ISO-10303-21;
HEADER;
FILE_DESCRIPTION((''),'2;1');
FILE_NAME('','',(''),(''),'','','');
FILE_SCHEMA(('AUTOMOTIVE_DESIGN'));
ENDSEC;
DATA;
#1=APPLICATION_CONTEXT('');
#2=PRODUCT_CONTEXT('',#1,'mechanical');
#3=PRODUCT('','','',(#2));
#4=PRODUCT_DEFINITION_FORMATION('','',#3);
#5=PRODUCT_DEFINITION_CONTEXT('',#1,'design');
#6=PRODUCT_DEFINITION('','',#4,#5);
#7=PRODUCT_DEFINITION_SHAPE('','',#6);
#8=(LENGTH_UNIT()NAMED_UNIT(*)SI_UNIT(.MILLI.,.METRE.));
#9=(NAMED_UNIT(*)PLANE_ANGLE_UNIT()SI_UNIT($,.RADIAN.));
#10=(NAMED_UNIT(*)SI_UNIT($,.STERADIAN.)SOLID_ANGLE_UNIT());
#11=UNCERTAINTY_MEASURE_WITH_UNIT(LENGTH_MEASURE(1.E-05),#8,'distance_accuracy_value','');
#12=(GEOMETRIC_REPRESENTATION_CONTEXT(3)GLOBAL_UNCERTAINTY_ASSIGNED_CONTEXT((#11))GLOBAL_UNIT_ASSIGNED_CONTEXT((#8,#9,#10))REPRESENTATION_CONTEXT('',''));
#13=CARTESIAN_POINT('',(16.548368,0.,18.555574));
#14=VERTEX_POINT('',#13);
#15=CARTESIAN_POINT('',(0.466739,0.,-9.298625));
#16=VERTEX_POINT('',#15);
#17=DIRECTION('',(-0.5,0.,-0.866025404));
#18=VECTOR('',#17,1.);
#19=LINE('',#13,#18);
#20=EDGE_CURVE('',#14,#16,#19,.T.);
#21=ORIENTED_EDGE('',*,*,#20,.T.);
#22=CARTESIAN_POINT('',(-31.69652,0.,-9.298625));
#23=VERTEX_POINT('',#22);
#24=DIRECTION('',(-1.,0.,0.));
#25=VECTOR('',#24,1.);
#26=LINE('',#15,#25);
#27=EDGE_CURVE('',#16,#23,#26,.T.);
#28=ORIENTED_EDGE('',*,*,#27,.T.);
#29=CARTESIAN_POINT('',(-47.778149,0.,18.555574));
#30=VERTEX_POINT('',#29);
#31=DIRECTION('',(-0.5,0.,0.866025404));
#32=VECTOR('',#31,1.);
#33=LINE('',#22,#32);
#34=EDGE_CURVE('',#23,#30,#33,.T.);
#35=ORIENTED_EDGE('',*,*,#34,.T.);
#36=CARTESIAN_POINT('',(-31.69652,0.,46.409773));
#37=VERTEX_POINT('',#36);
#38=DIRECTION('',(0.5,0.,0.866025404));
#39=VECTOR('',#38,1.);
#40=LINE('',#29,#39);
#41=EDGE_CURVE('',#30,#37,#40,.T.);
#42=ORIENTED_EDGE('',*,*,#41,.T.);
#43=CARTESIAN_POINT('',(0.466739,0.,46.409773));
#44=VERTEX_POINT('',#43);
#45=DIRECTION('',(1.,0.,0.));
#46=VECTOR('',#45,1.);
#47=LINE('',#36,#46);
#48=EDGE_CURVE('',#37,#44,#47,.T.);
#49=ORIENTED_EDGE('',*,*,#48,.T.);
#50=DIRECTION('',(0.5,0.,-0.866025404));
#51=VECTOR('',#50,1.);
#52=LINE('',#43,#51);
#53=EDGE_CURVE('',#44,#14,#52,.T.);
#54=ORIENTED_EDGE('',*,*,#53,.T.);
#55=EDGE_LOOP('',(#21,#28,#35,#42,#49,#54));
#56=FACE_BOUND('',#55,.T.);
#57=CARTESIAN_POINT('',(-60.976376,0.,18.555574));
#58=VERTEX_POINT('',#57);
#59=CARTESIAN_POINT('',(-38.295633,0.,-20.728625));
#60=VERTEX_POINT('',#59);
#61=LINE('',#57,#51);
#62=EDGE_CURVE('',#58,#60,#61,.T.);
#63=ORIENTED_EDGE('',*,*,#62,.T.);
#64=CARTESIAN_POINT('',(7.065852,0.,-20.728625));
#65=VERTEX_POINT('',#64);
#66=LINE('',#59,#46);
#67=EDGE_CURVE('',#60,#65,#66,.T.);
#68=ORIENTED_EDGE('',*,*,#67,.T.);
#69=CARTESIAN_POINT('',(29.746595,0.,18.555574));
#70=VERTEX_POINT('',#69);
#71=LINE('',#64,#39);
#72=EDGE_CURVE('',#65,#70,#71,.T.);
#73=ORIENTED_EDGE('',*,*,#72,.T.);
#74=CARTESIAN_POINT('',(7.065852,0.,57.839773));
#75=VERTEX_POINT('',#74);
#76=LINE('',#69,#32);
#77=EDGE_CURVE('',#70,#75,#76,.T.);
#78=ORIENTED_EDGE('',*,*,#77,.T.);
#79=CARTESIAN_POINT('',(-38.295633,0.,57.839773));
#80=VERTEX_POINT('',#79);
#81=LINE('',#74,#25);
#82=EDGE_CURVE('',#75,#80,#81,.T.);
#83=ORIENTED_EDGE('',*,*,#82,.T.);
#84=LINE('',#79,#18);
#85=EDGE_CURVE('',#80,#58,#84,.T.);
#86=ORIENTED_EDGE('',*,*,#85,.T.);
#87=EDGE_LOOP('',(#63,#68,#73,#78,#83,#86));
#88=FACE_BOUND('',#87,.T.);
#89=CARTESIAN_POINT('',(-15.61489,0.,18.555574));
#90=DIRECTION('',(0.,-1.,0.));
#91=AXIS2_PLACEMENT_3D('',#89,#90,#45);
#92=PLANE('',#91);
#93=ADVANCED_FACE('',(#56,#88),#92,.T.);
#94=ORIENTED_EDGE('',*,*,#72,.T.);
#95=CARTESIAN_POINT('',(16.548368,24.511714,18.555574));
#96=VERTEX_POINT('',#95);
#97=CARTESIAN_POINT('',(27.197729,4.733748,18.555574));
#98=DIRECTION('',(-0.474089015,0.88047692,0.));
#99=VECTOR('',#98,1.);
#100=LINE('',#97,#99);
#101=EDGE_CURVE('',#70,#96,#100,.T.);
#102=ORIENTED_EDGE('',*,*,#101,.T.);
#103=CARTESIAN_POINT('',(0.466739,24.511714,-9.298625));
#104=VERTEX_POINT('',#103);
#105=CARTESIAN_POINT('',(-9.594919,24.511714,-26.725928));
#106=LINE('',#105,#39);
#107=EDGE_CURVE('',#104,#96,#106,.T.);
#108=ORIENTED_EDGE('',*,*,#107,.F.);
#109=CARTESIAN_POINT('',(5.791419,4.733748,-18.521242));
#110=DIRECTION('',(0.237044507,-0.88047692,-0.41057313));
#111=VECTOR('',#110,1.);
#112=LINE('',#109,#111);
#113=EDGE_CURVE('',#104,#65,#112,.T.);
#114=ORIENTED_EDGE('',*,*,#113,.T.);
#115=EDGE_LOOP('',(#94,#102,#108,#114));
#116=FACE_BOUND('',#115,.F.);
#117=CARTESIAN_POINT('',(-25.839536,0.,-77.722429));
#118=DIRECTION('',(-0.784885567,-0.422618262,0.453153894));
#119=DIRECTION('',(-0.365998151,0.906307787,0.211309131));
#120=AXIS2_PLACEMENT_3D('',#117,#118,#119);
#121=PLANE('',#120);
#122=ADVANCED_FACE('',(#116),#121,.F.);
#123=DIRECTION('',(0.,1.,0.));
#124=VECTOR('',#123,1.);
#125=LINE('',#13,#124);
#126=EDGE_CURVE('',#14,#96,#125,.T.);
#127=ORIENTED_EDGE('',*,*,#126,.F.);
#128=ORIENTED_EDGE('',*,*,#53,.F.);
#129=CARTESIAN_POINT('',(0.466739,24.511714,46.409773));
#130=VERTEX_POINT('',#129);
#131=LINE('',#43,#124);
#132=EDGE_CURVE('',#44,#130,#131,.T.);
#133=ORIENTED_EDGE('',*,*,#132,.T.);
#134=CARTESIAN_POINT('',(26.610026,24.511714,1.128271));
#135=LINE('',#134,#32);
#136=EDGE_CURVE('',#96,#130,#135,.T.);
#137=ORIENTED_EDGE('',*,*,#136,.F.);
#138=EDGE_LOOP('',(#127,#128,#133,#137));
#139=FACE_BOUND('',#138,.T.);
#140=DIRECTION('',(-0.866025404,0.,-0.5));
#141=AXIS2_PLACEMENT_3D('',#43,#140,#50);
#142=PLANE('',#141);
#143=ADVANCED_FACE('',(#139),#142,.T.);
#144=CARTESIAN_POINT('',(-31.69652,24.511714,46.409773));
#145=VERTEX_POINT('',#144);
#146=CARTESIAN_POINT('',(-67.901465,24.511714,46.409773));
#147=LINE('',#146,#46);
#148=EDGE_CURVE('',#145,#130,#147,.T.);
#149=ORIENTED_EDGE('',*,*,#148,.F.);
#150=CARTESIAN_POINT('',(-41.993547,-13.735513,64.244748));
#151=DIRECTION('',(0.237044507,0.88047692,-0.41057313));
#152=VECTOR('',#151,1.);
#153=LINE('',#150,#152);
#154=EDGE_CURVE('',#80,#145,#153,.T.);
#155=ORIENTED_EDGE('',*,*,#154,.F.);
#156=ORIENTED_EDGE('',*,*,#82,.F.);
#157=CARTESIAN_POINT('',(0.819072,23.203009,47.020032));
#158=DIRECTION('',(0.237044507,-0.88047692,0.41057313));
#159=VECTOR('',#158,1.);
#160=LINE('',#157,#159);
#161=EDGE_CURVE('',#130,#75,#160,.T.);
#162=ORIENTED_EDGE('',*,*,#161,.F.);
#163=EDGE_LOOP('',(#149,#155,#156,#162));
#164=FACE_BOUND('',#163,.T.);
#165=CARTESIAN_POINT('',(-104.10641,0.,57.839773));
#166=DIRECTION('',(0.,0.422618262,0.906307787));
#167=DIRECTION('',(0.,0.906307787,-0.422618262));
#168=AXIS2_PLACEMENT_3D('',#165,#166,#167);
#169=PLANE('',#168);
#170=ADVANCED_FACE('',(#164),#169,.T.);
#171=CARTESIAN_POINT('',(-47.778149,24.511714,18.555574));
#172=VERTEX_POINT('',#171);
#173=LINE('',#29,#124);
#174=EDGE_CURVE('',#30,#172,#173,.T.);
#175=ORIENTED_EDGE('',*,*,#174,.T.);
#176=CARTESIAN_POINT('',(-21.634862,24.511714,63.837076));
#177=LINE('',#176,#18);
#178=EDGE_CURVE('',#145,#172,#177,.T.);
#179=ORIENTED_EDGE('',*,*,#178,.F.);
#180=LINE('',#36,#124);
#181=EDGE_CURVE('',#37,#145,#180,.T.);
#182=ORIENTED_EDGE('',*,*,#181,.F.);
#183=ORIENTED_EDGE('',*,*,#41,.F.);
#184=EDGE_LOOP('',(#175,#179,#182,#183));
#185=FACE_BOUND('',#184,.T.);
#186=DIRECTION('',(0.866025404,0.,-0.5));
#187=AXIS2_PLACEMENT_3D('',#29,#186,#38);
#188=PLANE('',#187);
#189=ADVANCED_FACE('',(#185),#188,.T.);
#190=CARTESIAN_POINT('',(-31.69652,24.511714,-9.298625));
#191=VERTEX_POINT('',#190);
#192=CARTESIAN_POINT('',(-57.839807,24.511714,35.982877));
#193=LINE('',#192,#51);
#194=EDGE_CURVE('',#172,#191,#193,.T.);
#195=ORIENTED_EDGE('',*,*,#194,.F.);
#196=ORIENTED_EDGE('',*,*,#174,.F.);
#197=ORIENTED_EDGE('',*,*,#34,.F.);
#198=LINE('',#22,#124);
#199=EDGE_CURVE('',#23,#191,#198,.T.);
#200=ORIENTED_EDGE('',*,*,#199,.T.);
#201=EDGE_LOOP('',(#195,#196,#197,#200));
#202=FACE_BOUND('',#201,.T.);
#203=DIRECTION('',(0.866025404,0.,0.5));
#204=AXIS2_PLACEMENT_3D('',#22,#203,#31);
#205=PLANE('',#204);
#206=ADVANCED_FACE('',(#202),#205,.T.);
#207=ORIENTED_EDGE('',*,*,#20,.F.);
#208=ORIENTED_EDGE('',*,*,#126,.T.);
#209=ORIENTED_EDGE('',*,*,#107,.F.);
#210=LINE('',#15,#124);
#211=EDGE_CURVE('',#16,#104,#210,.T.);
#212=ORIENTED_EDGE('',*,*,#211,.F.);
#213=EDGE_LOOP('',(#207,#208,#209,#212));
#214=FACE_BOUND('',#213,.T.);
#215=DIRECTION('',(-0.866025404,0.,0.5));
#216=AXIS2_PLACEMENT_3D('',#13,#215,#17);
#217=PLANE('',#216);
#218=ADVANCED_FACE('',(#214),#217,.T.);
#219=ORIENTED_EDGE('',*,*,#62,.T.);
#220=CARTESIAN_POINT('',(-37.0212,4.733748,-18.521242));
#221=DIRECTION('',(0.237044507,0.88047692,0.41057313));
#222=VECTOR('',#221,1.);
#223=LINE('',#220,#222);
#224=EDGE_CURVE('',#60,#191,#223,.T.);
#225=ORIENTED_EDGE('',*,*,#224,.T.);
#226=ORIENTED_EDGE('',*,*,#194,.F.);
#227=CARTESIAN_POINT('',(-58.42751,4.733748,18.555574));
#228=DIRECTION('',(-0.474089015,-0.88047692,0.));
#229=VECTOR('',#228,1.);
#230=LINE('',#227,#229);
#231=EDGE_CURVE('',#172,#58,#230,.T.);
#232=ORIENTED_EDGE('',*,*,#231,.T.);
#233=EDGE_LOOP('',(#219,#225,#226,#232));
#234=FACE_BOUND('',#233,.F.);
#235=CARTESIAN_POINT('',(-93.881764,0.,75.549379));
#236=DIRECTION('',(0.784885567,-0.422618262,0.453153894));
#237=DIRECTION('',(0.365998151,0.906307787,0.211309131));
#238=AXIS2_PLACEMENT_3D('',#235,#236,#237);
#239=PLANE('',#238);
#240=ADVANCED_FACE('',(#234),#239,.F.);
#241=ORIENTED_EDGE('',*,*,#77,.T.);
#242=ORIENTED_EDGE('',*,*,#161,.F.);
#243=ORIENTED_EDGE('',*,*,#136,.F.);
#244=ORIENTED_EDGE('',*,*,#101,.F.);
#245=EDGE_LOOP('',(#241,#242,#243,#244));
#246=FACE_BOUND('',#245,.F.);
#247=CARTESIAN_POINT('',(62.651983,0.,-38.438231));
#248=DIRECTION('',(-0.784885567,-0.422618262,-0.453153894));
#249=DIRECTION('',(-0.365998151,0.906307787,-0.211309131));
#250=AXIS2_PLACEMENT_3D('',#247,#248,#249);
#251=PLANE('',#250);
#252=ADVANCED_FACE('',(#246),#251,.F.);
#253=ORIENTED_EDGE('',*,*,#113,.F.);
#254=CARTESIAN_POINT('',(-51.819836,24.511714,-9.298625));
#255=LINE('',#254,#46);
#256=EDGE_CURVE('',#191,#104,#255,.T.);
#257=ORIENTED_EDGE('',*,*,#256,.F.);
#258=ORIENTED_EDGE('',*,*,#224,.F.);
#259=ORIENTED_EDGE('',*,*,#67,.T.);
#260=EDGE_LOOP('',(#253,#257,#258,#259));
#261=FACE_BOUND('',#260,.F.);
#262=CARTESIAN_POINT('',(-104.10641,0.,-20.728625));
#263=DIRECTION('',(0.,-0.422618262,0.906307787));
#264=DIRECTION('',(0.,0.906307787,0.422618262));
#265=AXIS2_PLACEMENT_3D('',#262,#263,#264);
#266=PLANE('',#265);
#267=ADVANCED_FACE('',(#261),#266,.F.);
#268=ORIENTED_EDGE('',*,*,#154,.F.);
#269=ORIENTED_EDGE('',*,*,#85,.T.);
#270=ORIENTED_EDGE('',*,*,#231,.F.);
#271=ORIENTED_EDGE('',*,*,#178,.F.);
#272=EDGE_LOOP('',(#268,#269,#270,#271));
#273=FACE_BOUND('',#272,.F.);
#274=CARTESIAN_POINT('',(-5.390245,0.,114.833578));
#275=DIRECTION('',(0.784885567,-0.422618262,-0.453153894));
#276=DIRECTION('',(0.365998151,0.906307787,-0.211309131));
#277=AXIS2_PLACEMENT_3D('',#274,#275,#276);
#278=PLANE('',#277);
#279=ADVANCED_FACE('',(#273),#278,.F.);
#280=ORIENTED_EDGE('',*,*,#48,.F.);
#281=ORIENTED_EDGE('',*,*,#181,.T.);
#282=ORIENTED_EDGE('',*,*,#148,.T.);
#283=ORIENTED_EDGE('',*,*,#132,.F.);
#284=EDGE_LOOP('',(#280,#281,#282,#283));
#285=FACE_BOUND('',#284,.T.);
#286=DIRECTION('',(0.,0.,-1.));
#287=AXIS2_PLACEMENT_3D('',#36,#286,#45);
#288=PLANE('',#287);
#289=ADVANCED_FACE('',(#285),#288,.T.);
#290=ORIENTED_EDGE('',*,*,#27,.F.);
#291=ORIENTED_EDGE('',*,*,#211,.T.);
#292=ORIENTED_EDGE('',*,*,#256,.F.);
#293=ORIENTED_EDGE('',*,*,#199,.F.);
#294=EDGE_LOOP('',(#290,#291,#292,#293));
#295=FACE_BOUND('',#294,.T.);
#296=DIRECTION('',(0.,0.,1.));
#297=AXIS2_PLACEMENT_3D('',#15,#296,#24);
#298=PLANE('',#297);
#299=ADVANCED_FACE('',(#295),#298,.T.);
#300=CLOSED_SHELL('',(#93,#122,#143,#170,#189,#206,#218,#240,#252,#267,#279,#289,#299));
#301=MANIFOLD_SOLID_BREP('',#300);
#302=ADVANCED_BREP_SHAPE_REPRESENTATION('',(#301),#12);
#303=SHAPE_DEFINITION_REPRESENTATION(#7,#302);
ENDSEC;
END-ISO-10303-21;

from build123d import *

# Parameters (mm, degrees)
F1_DEPTH    = 25.4
F2_T1_DEPTH = 176.9830394525
F2_T3_DEPTH = 176.9830394525
F2_T5_DEPTH = 176.9830394525
F2_T7_DEPTH = 176.9830394525
F2_T9_DEPTH = 176.9830394525


# Not quite as in the source:
# - a fillet or chamfer that OpenCascade refuses, or shapes differently, is made with other operations: its cross-section is extruded or revolved along the edge and cut away or added


with BuildPart() as f1:
    # F0 (on Front) → F1 (new body)
    with BuildSketch(Plane.XZ):
        Polygon((7.0658522586, 57.8397729191), (-38.2956332455, 57.8397729191), (-60.9763759976, 18.5555741191), (-38.2956332455, -20.7286246809), (7.0658522586, -20.7286246809), (29.7465950107, 18.5555741191), align=None)
        Polygon((16.548367857, 18.5555741191), (0.4667386818, -9.2986246809), (-31.6965196687, -9.2986246809), (-47.7781488439, 18.5555741191), (-31.6965196687, 46.4097729191), (0.4667386818, 46.4097729191), align=None, mode=Mode.SUBTRACT)
    extrude(amount=-F1_DEPTH)

    # F2: chamfer of 25.4 x 11.8442145171 on 6 edges, made by hand

    # F2_s2 → F2_t1 (cut)
    with BuildSketch(Plane.YZ.offset(-104.1064102197)):
        Polygon((0, 57.8397729191), (25.4, 45.995558402), (25.4, 57.8397729191), align=None)
        Polygon((0, -20.7286246809), (25.4, -8.8844101638), (25.4, -20.7286246809), align=None)
    extrude(amount=F2_T1_DEPTH, mode=Mode.SUBTRACT)

    # F2_s4 → F2_t3 (cut)
    with BuildSketch(Plane(origin=(48.3768365242, 0, 83.7911387694), x_dir=(0, 1, 0), z_dir=(-0.5, 0, -0.8660254038))):
        Polygon((0, -62.0848777042), (25.4, -50.2406631871), (25.4, -62.0848777042), align=None)
    extrude(amount=F2_T3_DEPTH, mode=Mode.SUBTRACT)

    # F2_s6 → F2_t5 (cut)
    with BuildSketch(Plane(origin=(32.3072379553, 0, -55.9577775908), x_dir=(0, 1, 0), z_dir=(-0.5, 0, 0.8660254038))):
        Polygon((0, -35.0390940149), (25.4, -23.1948794978), (25.4, -35.0390940149), align=None)
    extrude(amount=F2_T5_DEPTH, mode=Mode.SUBTRACT)

    # F2_s8 → F2_t7 (cut)
    with BuildSketch(Plane(origin=(-40.114683202, 0, -69.4806694354), x_dir=(0, 1, 0), z_dir=(0.5, 0, 0.8660254038))):
        Polygon((0, -16.4835198958), (25.4, -4.6393053787), (25.4, -16.4835198958), align=None)
    extrude(amount=F2_T7_DEPTH, mode=Mode.SUBTRACT)

    # F2_s10 → F2_t9 (cut)
    with BuildSketch(Plane(origin=(-56.184281771, 0, 97.3140306141), x_dir=(0, 1, 0), z_dir=(0.5, 0, -0.8660254038))):
        Polygon((0, -43.5293035851), (25.4, -31.685089068), (25.4, -43.5293035851), align=None)
    extrude(amount=F2_T9_DEPTH, mode=Mode.SUBTRACT)


solid = f1.part
